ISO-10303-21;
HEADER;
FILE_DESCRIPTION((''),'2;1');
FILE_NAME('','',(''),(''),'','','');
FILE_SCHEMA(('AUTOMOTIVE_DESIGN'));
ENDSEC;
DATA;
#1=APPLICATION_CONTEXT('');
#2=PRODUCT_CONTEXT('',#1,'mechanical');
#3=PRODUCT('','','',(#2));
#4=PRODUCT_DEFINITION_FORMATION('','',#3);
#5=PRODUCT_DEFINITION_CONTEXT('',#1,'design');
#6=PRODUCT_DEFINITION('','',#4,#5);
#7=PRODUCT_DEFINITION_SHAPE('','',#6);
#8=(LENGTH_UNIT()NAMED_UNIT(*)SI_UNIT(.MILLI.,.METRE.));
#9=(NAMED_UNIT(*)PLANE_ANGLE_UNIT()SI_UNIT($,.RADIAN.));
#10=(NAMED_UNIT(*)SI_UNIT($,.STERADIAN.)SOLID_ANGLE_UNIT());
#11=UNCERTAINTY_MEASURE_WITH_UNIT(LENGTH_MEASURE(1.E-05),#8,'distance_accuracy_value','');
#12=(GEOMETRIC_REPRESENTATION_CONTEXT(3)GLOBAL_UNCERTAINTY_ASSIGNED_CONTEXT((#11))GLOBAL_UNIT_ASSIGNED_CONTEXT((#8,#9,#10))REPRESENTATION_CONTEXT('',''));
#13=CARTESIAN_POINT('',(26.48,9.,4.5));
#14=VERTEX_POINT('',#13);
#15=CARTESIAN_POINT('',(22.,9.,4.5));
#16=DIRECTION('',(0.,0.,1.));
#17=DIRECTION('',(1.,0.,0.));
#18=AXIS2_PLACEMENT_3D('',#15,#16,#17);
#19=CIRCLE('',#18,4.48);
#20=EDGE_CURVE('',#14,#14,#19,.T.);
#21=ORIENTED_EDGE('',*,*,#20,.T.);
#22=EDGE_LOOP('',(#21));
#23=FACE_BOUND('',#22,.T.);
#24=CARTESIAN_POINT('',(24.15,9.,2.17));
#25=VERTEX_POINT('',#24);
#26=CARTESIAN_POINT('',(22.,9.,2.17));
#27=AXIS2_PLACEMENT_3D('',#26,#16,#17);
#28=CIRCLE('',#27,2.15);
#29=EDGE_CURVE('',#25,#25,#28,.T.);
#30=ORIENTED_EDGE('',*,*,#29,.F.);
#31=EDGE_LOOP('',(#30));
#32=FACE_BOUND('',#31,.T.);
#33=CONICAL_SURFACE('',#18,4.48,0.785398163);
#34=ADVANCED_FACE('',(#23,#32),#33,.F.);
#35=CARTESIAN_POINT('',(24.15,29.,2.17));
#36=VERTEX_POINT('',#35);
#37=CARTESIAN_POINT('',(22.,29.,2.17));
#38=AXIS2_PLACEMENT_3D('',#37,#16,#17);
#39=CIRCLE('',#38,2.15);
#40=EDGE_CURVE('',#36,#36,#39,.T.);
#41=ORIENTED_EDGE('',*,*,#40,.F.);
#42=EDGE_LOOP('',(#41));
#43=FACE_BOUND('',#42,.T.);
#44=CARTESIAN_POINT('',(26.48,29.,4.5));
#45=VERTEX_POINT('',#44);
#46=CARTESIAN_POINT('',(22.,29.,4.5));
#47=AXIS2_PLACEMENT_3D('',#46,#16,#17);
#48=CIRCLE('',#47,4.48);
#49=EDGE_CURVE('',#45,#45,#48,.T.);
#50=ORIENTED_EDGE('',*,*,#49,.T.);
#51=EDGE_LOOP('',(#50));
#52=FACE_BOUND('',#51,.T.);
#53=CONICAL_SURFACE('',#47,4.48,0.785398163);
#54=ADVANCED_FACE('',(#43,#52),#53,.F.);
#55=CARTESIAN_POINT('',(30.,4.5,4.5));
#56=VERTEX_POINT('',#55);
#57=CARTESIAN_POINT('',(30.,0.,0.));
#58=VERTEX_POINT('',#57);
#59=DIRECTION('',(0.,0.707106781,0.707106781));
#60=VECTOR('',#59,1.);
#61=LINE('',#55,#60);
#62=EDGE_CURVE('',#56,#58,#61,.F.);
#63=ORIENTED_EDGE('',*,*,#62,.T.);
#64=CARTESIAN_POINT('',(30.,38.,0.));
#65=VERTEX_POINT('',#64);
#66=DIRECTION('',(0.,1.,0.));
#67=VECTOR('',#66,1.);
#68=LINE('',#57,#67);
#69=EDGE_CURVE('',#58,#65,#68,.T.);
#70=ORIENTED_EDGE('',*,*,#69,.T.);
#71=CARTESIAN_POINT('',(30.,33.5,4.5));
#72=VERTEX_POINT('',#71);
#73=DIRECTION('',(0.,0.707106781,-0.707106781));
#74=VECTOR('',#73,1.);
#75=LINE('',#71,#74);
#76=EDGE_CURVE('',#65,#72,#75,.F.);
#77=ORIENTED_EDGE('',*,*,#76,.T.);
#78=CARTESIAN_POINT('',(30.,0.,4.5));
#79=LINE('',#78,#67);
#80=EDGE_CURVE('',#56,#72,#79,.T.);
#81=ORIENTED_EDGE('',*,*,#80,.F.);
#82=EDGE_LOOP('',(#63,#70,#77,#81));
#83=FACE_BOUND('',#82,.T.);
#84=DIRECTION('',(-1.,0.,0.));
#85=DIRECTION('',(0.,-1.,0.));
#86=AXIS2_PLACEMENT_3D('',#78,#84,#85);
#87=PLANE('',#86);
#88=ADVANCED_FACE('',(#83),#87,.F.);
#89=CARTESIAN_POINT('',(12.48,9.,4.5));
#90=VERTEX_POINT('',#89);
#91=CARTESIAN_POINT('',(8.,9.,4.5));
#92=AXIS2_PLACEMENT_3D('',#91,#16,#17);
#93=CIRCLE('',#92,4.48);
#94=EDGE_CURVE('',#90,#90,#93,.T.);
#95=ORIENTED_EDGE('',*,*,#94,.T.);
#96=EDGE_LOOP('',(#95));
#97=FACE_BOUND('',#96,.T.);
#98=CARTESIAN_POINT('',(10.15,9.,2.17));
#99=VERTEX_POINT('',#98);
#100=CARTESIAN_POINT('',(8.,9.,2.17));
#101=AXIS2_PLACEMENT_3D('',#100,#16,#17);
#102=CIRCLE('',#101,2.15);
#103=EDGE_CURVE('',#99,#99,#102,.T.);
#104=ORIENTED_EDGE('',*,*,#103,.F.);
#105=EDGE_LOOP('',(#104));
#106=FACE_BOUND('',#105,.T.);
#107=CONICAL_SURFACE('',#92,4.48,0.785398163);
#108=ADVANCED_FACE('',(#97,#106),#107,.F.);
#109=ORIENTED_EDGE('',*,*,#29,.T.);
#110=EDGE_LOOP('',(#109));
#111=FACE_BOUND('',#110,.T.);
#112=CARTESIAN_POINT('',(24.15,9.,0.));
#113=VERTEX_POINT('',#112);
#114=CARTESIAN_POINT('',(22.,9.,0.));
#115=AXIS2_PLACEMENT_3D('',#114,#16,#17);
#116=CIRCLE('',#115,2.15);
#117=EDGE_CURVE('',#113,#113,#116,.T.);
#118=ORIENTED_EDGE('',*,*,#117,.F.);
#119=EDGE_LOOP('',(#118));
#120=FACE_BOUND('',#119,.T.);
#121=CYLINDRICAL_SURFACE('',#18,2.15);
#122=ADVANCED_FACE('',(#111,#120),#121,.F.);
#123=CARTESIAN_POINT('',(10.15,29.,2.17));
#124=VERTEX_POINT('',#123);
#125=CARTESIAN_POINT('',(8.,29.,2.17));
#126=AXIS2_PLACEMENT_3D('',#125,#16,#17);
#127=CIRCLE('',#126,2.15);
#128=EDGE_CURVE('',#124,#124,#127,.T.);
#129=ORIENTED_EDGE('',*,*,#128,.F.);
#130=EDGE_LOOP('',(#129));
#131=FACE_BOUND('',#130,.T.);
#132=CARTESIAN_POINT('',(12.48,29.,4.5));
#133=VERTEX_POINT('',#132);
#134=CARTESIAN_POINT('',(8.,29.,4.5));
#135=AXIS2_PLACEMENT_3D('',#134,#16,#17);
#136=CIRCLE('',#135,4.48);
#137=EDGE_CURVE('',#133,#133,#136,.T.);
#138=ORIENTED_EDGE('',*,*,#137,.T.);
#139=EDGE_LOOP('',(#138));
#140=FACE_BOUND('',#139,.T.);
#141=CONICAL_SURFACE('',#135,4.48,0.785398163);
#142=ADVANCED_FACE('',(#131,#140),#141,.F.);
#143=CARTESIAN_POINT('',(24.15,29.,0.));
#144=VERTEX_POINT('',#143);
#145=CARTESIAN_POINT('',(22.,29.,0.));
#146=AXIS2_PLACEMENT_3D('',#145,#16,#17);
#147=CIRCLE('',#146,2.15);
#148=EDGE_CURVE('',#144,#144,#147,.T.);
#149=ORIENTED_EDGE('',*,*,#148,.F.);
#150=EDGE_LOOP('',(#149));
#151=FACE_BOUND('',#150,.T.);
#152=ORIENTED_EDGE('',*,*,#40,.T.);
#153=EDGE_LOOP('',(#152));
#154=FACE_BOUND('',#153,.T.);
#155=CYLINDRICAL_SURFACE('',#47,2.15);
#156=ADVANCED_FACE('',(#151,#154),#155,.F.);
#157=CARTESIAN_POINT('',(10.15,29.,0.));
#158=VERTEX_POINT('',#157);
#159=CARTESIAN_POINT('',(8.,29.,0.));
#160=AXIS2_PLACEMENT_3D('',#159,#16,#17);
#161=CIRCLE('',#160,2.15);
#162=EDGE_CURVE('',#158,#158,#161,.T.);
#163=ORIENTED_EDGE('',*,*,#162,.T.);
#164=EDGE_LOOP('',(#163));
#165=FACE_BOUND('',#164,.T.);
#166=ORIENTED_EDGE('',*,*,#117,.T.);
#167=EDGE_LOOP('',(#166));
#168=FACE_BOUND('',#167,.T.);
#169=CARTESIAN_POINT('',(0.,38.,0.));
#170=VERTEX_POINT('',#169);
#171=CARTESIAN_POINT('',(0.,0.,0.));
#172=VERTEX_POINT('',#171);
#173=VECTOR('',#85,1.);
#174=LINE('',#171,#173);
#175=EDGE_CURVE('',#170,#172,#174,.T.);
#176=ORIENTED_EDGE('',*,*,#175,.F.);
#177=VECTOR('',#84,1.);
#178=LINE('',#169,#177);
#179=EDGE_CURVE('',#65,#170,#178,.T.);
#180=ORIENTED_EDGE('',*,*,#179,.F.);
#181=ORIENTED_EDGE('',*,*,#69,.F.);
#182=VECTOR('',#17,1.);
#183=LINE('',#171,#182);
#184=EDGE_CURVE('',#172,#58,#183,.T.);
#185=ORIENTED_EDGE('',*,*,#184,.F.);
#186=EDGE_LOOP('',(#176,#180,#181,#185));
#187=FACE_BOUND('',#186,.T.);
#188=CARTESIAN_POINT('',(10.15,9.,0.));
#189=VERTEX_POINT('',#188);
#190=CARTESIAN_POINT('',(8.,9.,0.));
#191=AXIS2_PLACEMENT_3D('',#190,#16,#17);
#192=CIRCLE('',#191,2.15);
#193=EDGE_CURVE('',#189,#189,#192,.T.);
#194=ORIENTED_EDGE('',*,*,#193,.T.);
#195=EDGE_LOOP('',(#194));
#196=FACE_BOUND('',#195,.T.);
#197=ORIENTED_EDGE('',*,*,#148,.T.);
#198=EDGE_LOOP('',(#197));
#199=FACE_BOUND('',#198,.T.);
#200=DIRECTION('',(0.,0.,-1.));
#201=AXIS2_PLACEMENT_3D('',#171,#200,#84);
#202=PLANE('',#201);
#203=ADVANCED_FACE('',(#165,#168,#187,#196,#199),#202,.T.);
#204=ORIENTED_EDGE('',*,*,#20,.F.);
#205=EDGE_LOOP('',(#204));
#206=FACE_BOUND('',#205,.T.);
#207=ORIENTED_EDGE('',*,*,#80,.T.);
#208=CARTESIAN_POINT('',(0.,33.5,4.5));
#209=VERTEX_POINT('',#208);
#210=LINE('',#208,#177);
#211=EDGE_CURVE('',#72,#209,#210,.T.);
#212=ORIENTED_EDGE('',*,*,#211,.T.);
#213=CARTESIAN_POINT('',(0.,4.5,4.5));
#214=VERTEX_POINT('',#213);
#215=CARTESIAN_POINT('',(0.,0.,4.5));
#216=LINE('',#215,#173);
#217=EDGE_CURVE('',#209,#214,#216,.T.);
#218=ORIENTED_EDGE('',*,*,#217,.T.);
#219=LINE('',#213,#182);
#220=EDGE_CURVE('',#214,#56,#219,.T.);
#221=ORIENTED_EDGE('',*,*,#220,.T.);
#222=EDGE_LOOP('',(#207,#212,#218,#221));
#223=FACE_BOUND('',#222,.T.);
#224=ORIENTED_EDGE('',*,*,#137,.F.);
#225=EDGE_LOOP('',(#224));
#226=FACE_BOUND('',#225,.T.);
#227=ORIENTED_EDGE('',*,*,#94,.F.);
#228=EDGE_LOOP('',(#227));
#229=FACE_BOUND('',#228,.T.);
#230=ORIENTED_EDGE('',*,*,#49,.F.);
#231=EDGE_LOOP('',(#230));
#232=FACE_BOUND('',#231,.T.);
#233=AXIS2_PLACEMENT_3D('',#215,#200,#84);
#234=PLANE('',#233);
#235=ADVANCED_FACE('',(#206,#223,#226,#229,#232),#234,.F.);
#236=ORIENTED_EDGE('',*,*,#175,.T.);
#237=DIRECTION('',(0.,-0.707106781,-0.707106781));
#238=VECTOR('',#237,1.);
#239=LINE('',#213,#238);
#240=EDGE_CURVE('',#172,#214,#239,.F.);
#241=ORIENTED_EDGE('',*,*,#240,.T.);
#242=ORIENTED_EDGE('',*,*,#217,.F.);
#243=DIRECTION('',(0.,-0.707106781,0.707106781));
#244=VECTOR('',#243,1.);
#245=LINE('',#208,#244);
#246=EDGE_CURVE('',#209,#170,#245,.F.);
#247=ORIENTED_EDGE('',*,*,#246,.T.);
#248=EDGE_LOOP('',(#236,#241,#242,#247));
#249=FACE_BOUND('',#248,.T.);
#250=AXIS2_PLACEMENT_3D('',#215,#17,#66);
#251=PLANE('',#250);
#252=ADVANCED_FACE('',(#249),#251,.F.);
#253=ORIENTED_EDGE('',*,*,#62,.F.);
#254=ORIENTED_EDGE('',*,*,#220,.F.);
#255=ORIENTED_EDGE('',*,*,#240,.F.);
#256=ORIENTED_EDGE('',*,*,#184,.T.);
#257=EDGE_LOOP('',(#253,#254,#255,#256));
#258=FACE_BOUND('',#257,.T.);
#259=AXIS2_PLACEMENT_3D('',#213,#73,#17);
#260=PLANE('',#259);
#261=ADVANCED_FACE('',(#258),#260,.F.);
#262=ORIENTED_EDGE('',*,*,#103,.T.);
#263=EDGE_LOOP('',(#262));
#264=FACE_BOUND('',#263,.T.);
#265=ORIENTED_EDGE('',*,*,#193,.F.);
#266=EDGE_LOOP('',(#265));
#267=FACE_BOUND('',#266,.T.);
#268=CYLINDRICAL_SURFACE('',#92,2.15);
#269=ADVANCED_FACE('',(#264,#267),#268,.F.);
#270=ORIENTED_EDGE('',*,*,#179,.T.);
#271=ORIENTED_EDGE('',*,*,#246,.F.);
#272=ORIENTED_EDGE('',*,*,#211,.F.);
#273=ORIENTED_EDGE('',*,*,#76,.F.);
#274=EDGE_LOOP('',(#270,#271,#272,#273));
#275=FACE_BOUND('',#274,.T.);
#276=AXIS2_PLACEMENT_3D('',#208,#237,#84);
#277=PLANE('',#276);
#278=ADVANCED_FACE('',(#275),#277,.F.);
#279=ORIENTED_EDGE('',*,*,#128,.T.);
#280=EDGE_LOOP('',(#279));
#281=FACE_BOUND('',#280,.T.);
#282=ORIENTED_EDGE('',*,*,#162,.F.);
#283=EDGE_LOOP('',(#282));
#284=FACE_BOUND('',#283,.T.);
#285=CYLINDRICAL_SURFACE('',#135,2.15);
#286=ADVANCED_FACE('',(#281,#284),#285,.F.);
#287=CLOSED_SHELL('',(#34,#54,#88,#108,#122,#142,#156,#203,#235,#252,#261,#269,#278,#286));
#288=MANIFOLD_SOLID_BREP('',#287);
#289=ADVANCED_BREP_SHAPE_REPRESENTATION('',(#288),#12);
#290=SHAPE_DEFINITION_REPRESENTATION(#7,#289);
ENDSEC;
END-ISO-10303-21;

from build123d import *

# Parameters (mm, degrees)
SKETCH_1_W                   = 30
SKETCH_1_H                   = 38
EXTRUDE_1_DEPTH              = 4.5
CHAMFER_1_SIZE               = 4.5
HOLE_WIZARD_M4_1_D           = 4.3
HOLE_WIZARD_M4_1_CSINK_D     = 8.96
HOLE_WIZARD_M4_1_CSINK_ANGLE = 90


with BuildPart() as part:
    # 草图1 → 凸台-拉伸1 (new body)
    with BuildSketch(Plane.XY):
        with Locations((15, 19)):
            Rectangle(SKETCH_1_W, SKETCH_1_H)
    extrude(amount=EXTRUDE_1_DEPTH)

    # 倒角1
    chamfer_1_edges = [part.edges().sort_by_distance(p)[0] for p in [
        (15, 0, 4.5),
        (15, 38, 4.5),
    ]]
    chamfer(chamfer_1_edges, length=CHAMFER_1_SIZE - 0.0001)  # a hair under: the kernel refuses the full size

    # M4 六角凹锥坑螺钉的锥形沉头孔1 (through all)
    with Locations(Plane.XY.offset(4.5)):
        with Locations((8, 9), (8, 29), (22, 29), (22, 9)):
            CounterSinkHole(HOLE_WIZARD_M4_1_D / 2, HOLE_WIZARD_M4_1_CSINK_D / 2, counter_sink_angle=HOLE_WIZARD_M4_1_CSINK_ANGLE)


solid = part.part
